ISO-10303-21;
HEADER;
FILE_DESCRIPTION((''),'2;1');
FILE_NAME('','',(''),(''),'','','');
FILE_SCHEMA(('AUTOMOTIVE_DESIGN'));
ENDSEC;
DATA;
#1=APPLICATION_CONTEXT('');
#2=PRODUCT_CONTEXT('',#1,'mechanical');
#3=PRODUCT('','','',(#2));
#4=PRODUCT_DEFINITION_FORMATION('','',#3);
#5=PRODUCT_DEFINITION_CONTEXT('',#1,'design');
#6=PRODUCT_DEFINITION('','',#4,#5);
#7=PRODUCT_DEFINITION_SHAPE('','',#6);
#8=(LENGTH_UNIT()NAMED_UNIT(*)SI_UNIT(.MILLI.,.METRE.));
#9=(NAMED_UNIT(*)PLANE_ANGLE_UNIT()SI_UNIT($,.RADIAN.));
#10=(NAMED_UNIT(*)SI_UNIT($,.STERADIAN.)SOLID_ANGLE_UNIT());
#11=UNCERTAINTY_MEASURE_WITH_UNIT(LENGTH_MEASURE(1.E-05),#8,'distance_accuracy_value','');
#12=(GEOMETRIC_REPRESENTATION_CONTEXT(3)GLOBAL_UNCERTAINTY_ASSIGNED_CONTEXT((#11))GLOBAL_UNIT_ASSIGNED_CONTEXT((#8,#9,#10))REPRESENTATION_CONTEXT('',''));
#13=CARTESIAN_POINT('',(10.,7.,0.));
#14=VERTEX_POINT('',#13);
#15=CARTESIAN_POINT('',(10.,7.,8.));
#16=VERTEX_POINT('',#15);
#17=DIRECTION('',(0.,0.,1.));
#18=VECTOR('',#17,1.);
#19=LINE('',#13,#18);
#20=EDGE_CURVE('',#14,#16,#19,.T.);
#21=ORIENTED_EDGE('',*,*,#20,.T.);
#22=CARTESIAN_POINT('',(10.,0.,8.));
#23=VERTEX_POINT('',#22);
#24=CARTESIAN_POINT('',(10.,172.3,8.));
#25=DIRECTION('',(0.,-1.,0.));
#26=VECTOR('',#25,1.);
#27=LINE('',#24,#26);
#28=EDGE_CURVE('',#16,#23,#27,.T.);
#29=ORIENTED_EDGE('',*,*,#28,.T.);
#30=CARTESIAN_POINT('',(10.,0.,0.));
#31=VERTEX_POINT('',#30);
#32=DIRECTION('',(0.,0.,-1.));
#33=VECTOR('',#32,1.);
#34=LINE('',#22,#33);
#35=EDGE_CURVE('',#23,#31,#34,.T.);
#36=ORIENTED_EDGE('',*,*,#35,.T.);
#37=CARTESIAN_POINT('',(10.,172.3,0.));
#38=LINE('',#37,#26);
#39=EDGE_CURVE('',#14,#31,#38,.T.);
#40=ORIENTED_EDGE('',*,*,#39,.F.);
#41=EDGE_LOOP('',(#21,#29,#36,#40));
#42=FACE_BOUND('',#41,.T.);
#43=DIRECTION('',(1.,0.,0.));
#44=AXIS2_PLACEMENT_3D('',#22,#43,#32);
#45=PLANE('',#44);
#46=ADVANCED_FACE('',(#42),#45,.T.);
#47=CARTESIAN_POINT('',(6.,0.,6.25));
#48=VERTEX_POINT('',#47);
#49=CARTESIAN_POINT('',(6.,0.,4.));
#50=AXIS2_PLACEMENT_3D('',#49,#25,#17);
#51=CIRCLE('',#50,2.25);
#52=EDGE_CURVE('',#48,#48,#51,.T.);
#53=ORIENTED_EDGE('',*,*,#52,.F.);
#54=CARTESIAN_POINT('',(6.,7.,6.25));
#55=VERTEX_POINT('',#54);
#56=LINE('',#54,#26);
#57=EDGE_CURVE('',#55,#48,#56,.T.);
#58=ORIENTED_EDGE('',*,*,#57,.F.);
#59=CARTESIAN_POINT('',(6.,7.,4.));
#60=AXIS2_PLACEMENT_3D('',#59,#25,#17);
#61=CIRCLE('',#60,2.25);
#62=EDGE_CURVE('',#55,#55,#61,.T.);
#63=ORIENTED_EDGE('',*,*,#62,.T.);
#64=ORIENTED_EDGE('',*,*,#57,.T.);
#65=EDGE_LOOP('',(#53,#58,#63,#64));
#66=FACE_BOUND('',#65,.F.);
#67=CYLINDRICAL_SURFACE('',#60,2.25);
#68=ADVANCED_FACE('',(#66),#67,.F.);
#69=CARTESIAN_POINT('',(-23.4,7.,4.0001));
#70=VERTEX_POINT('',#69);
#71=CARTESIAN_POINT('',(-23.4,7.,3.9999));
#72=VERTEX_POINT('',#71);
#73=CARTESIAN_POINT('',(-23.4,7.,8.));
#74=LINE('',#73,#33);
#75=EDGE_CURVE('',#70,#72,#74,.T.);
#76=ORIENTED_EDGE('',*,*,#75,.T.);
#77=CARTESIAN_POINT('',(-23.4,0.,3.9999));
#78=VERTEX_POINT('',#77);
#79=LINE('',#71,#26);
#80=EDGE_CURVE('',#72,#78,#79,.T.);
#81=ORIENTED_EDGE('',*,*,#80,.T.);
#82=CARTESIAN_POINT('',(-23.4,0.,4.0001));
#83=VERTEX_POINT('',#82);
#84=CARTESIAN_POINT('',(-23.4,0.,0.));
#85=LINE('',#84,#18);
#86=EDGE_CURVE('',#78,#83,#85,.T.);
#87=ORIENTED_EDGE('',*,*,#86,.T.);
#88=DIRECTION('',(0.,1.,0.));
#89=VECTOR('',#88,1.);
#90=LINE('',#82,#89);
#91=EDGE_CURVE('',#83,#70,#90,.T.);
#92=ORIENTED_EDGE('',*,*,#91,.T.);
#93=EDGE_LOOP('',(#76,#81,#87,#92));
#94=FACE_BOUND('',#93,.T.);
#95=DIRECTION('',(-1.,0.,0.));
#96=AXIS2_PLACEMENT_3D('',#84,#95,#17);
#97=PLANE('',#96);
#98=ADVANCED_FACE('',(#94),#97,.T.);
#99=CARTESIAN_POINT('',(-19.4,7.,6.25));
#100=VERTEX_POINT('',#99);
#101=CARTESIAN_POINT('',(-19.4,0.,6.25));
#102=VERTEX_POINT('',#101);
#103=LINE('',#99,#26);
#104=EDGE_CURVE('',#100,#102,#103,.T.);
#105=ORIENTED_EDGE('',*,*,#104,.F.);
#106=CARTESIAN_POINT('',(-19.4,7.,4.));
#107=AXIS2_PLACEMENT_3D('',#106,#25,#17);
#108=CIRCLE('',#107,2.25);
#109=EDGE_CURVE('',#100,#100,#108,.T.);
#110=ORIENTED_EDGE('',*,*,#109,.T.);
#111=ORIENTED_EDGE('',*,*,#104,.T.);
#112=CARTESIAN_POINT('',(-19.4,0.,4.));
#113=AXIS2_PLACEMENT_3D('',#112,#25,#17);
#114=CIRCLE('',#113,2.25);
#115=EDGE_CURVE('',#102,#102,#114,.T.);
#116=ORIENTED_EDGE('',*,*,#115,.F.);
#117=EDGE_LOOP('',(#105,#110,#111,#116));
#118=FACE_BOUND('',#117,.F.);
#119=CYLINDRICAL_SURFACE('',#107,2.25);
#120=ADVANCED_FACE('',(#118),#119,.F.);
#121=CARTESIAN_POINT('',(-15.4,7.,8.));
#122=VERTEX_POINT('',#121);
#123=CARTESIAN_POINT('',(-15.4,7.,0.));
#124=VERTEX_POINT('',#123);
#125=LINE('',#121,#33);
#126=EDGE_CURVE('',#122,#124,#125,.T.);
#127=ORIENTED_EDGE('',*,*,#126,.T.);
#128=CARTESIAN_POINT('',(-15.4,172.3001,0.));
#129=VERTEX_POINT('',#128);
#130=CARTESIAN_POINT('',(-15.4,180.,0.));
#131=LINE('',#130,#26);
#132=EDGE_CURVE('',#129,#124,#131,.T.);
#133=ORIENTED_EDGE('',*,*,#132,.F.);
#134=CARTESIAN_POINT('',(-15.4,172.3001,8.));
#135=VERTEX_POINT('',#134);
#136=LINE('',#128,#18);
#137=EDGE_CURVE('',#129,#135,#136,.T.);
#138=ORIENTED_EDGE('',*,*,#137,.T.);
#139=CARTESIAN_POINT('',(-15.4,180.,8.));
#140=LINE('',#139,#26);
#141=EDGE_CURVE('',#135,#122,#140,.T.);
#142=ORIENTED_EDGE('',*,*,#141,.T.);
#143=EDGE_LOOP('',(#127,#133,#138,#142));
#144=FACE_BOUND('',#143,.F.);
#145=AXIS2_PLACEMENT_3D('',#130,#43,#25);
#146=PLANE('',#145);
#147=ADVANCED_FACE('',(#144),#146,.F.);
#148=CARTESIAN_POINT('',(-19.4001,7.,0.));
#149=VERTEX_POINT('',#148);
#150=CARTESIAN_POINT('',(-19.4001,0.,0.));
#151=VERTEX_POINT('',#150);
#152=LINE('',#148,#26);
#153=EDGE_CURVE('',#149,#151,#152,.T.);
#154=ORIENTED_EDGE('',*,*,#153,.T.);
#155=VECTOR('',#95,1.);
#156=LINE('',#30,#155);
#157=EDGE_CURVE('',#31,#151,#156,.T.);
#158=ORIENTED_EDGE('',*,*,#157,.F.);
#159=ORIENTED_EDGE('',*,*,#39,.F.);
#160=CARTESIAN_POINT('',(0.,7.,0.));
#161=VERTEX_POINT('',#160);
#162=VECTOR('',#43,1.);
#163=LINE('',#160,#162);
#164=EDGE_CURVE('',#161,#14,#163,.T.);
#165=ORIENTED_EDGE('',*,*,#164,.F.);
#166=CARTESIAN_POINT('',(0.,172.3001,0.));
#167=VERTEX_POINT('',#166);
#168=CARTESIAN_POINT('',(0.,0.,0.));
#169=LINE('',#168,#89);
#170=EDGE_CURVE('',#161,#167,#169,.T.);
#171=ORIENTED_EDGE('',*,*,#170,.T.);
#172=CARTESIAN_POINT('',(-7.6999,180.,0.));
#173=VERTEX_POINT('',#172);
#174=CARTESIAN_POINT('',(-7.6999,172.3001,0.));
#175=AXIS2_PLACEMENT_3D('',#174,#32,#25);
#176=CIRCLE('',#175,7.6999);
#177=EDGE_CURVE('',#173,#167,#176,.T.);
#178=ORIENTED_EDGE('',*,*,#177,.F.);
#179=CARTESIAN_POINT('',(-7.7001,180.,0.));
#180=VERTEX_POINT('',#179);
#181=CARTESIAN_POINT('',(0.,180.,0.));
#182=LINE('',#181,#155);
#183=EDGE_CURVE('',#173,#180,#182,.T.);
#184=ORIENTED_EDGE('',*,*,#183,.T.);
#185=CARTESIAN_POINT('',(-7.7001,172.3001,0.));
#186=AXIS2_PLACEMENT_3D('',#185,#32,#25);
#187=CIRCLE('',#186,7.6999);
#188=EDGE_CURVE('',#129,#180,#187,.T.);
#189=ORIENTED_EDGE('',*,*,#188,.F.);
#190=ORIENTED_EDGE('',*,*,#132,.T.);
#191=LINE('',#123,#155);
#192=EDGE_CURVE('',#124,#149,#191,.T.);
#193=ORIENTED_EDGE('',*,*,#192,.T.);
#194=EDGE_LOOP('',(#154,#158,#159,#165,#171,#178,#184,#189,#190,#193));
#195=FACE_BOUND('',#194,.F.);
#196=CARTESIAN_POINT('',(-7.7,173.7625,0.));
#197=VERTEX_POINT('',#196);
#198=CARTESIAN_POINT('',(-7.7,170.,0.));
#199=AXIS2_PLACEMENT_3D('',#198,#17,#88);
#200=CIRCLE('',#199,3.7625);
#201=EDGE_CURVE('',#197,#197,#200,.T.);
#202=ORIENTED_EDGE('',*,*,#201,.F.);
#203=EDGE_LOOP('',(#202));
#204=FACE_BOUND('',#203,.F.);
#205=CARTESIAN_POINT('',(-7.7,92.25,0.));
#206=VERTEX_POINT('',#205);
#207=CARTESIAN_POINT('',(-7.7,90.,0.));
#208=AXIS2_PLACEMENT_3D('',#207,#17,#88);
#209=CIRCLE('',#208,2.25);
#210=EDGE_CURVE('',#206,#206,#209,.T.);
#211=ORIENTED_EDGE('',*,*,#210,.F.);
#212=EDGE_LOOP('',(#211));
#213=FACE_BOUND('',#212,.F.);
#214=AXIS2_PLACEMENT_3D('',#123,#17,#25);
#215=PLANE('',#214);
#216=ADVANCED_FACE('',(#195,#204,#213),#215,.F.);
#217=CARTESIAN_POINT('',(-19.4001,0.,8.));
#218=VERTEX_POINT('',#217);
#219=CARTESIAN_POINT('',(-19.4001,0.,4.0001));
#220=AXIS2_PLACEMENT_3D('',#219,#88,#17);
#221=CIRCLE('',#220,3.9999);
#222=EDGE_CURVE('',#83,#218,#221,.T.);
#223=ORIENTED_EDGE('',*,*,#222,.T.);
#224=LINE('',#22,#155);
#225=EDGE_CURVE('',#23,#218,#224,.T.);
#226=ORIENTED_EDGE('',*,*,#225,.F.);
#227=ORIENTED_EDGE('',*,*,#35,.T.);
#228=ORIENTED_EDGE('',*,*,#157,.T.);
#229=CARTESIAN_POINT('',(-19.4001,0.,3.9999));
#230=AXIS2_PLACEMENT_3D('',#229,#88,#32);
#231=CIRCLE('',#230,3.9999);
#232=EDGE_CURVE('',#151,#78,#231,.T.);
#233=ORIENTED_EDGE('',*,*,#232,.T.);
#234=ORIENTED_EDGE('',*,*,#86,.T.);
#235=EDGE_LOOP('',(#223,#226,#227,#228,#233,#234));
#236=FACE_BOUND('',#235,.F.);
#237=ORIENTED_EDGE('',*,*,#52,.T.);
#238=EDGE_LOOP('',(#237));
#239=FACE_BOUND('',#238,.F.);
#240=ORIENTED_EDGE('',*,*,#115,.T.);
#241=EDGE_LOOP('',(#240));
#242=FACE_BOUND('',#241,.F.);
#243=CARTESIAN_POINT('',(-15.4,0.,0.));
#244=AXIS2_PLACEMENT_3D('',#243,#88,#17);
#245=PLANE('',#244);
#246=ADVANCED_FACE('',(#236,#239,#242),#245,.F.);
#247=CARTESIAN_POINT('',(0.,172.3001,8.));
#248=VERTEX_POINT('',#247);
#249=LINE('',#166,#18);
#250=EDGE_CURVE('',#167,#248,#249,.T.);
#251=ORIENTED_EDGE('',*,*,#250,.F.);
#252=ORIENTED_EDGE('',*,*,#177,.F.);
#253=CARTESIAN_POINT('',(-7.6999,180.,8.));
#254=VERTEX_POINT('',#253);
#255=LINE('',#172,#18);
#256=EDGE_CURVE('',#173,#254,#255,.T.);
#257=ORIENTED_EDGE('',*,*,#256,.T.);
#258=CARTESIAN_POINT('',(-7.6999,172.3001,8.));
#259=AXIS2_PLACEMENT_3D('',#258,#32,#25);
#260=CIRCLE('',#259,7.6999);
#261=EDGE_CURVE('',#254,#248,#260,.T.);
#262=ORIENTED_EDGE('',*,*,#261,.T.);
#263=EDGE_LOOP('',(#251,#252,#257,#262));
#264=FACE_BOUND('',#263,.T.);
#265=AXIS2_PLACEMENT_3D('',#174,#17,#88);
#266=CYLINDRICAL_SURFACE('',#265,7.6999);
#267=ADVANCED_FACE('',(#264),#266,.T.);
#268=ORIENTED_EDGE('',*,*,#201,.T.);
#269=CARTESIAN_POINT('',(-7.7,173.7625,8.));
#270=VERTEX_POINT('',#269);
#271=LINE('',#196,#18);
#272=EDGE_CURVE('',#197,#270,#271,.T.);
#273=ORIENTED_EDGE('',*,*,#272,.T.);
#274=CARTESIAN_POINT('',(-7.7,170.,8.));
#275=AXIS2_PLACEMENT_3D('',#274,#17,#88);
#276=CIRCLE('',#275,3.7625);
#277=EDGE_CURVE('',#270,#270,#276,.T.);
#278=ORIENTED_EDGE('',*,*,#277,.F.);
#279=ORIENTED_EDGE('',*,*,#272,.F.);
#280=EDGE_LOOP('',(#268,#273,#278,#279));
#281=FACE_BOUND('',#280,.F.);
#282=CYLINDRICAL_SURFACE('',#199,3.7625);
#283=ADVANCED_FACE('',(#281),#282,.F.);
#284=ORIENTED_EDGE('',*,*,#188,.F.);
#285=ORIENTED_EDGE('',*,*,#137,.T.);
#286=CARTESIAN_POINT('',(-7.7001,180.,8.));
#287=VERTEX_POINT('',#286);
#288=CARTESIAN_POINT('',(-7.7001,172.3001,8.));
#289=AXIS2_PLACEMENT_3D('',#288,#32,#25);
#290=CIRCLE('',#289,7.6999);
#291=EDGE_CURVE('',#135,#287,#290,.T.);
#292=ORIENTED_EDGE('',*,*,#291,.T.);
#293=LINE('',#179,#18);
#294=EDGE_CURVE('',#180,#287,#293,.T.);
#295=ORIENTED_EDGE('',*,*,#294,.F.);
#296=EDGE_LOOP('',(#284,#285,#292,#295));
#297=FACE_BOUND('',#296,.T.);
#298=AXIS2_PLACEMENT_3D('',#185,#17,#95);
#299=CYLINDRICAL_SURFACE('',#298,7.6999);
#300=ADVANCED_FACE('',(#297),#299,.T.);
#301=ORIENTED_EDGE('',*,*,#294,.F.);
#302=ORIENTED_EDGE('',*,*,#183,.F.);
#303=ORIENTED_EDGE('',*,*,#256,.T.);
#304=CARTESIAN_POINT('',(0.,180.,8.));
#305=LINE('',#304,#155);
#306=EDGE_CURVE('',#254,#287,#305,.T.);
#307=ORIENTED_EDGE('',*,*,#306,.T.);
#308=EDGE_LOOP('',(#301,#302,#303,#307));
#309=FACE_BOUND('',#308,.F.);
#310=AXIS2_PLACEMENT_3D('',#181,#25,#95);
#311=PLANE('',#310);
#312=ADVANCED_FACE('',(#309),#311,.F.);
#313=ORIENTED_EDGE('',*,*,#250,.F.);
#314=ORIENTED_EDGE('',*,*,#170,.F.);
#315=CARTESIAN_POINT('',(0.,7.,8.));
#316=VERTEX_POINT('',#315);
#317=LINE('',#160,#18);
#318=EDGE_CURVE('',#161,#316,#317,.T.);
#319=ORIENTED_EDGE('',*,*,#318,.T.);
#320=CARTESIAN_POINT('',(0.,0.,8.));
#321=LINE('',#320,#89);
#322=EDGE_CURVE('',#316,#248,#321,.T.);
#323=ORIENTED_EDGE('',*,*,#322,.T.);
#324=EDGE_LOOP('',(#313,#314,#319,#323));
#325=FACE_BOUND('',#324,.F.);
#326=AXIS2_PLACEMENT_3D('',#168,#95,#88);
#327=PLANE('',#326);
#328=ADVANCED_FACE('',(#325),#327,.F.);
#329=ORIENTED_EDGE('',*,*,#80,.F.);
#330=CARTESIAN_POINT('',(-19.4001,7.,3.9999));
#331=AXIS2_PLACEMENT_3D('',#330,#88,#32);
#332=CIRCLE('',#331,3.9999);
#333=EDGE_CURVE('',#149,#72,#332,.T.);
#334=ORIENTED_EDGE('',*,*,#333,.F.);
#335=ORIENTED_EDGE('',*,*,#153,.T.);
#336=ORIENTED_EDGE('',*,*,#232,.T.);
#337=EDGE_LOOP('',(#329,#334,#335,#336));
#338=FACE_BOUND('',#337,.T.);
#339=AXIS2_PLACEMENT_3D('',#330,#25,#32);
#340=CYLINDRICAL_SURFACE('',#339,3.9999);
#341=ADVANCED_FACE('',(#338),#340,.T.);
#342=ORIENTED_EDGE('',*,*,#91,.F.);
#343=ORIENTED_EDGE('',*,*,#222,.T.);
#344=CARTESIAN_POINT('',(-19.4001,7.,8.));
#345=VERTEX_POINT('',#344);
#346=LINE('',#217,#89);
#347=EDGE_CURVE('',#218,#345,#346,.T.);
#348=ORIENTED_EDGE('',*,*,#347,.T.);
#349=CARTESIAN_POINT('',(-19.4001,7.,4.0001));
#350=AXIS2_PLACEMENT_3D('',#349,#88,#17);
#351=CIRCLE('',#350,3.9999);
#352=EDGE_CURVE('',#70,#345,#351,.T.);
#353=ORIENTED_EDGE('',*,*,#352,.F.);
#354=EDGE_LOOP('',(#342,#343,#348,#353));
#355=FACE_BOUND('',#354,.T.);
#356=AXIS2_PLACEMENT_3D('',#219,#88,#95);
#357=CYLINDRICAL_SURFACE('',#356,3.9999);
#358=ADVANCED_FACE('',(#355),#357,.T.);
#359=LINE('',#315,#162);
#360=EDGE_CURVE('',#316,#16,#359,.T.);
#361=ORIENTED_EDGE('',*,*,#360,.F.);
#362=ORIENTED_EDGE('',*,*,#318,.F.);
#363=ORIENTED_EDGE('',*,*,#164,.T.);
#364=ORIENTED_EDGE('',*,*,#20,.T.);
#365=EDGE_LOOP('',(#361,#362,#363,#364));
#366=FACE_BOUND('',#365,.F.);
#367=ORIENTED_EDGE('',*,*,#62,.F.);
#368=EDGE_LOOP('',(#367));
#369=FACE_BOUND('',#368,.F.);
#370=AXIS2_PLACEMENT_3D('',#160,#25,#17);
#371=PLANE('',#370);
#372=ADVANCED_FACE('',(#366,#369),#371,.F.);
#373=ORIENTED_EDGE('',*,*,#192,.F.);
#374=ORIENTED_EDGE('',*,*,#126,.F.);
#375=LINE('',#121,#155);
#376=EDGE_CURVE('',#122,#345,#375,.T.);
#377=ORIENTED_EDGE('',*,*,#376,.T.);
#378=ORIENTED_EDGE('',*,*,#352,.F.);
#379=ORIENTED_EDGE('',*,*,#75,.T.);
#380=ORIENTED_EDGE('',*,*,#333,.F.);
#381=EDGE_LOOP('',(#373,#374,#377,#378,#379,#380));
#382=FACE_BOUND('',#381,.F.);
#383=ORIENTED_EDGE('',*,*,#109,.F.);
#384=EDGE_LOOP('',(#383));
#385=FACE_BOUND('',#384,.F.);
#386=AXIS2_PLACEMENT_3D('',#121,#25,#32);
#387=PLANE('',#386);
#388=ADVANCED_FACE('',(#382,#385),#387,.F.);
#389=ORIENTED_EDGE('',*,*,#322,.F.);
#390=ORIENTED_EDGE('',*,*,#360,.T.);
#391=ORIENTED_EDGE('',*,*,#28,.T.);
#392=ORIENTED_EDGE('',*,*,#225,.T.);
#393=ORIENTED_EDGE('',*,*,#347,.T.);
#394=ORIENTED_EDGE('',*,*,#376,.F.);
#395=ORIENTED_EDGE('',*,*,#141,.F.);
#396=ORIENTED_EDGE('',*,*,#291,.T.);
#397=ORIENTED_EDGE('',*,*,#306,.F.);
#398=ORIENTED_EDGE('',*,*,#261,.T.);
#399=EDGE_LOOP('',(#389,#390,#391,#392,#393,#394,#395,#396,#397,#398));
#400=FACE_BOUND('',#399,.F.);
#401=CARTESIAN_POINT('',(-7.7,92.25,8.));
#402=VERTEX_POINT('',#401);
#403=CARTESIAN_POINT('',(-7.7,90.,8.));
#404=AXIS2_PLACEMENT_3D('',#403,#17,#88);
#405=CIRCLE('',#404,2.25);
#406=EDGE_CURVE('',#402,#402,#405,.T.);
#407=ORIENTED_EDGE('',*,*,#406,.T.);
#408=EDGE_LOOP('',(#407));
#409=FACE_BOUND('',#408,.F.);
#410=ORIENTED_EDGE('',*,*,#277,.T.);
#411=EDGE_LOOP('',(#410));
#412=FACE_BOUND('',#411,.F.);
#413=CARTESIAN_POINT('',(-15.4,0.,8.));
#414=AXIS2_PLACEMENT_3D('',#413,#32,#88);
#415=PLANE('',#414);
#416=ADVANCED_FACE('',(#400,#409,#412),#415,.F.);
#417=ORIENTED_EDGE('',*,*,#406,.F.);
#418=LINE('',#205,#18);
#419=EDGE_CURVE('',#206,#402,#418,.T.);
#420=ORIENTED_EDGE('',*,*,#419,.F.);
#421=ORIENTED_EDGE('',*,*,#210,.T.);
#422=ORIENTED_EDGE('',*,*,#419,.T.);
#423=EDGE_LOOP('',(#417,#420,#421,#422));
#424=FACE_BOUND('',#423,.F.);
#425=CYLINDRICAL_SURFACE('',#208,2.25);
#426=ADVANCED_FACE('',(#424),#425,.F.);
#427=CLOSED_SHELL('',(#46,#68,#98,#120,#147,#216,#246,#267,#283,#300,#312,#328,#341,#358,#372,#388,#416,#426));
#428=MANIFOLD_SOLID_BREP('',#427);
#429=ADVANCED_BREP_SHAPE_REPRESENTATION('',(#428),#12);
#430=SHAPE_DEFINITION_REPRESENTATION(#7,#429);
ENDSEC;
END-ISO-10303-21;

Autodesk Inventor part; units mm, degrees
ref_plane "YZ Plane" through (0, 0, 0) normal (1, 0, 0) x (0, 1, 0)
ref_plane "XZ Plane" through (0, 0, 0) normal (0, 1, 0) x (-1, 0, 0)
ref_plane "XY Plane" through (0, 0, 0) normal (0, 0, 1) x (1, 0, 0)
sketch "Sketch1" plane through (0, 0, 0) normal (0, 0, 1) x (1, 0, 0)
  line L0 (-15.4, 0) -> (0, 0)
  line L1 (0, 0) -> (0, 180)
  line L2 (0, 180) -> (-15.4, 180)
  line L3 (-15.4, 180) -> (-15.4, 0)
  point P0 (0, 0)
  point P1 (-7.7, 170)
  dimension "d0" = 15.4
  dimension "d1" = 180
  dimension "d2" = 0
  dimension "d3" = 0
  dimension "d4" = 7.7
  dimension "d5" = 170
extrude "Extrusion1" add sketch "Sketch1" along normal blind 8
hole "Hole1" at (-7.7, 170, 0) direction (0, 0, 1) diameter 7.525 end through all
sketch "Sketch2" plane through (0, 0, 0) normal (1, 0, 0) x (0, 0, -1)
  point P0 (0, 0)
sketch "Sketch5" plane through (0, 0, 0) normal (0, 0, -1) x (-1, 0, 0)
  line L0 (15.4, 180) -> (15.4, 0) projected
  line L1 (15.4, 0) -> (0, 0) projected
  point P0 (7.7, 90)
  dimension "d27" = 7.7
  dimension "d28" = 90
full round fillet "Full Round Fillet1" first side at (0, 60, 2.6667) centre faces at (-5.1333, 180, 2.6667) second side at (-15.4, 120, 2.6667)
hole "Hole3" at (-7.7, 90, 0) direction (0, 0, 1) diameter 4.5 end through all clearance for "Flat Head Machine Screw" size "M4" standard "Ansi Metric M Profile"
sketch "Sketch6" plane through (0, 0, 8) normal (1, 0, 0) x (0, 0, -1)
  line L0 (0, 172.3) -> (0, 0) projected
  line L1 (8, 172.3) -> (8, 0) projected
  line L2 (0, 0) -> (8, 0)
  line L3 (8, 0) -> (8, 7)
  line L4 (8, 7) -> (0, 7)
  line L5 (0, 7) -> (0, 0)
  point P0 (8, 0)
  point P1 (0, 7)
  dimension "d36" = 7
extrude "Extrusion3" add sketch "Sketch6" along normal blind 10
sketch "Sketch7" plane through (0, 7, 8) normal (0, 1, 0) x (1, 0, 0)
  line L0 (0, 8) -> (10, 8) projected
  line L1 (10, 8) -> (10, 0) projected
  point P0 (6, 4)
  dimension "d39" = 4
  dimension "d40" = 4
hole "Hole4" at (6, 7, 4) direction (0, -1, 0) diameter 4.5 end through all clearance for "Flat Head Machine Screw" size "M4" standard "Ansi Metric M Profile"
sketch "Sketch8" plane through (-15.4, 0, 0) normal (-1, 0, 0) x (0, 0, 1)
  point P0 (0, 0)
sketch "Sketch9" plane through (-15.4, 0, 0) normal (-1, 0, 0) x (0, 0, 1)
  line L0 (0, 0) -> (8, 0) projected
  line L1 (8, 7) -> (8, 172.3) projected
  line L2 (0, 0) -> (8, 0)
  line L3 (8, 0) -> (8, 7)
  line L4 (8, 7) -> (0, 7)
  line L5 (0, 7) -> (0, 0)
extrude "Extrusion4" add sketch "Sketch9" along normal blind 8
sketch "Sketch10" plane through (-15.4, 7, 8) normal (0, 1, 0) x (1, 0, 0)
  line L0 (-8, 0) -> (-8, 8) projected
  line L1 (0, 8) -> (-8, 8) projected
  line L2 (0, 8) -> (0, 0) projected
  point P0 (15.4, 8)
  point P1 (-4, 4)
  dimension "d51" = 4
  dimension "d59" = 4
hole "Hole5" at (-19.4, 7, 4) direction (0, -1, 0) diameter 4.5 end through all clearance for "Flat Head Machine Screw" size "M4" standard "Ansi Metric M Profile"
full round fillet "Full Round Fillet2" first side at (-7.7, 33.9167, 8) centre faces at (-23.4, 2.3333, 2.6667) second side at (-7.7, 33.9167, 0)
properties part number "Slide Strut"
